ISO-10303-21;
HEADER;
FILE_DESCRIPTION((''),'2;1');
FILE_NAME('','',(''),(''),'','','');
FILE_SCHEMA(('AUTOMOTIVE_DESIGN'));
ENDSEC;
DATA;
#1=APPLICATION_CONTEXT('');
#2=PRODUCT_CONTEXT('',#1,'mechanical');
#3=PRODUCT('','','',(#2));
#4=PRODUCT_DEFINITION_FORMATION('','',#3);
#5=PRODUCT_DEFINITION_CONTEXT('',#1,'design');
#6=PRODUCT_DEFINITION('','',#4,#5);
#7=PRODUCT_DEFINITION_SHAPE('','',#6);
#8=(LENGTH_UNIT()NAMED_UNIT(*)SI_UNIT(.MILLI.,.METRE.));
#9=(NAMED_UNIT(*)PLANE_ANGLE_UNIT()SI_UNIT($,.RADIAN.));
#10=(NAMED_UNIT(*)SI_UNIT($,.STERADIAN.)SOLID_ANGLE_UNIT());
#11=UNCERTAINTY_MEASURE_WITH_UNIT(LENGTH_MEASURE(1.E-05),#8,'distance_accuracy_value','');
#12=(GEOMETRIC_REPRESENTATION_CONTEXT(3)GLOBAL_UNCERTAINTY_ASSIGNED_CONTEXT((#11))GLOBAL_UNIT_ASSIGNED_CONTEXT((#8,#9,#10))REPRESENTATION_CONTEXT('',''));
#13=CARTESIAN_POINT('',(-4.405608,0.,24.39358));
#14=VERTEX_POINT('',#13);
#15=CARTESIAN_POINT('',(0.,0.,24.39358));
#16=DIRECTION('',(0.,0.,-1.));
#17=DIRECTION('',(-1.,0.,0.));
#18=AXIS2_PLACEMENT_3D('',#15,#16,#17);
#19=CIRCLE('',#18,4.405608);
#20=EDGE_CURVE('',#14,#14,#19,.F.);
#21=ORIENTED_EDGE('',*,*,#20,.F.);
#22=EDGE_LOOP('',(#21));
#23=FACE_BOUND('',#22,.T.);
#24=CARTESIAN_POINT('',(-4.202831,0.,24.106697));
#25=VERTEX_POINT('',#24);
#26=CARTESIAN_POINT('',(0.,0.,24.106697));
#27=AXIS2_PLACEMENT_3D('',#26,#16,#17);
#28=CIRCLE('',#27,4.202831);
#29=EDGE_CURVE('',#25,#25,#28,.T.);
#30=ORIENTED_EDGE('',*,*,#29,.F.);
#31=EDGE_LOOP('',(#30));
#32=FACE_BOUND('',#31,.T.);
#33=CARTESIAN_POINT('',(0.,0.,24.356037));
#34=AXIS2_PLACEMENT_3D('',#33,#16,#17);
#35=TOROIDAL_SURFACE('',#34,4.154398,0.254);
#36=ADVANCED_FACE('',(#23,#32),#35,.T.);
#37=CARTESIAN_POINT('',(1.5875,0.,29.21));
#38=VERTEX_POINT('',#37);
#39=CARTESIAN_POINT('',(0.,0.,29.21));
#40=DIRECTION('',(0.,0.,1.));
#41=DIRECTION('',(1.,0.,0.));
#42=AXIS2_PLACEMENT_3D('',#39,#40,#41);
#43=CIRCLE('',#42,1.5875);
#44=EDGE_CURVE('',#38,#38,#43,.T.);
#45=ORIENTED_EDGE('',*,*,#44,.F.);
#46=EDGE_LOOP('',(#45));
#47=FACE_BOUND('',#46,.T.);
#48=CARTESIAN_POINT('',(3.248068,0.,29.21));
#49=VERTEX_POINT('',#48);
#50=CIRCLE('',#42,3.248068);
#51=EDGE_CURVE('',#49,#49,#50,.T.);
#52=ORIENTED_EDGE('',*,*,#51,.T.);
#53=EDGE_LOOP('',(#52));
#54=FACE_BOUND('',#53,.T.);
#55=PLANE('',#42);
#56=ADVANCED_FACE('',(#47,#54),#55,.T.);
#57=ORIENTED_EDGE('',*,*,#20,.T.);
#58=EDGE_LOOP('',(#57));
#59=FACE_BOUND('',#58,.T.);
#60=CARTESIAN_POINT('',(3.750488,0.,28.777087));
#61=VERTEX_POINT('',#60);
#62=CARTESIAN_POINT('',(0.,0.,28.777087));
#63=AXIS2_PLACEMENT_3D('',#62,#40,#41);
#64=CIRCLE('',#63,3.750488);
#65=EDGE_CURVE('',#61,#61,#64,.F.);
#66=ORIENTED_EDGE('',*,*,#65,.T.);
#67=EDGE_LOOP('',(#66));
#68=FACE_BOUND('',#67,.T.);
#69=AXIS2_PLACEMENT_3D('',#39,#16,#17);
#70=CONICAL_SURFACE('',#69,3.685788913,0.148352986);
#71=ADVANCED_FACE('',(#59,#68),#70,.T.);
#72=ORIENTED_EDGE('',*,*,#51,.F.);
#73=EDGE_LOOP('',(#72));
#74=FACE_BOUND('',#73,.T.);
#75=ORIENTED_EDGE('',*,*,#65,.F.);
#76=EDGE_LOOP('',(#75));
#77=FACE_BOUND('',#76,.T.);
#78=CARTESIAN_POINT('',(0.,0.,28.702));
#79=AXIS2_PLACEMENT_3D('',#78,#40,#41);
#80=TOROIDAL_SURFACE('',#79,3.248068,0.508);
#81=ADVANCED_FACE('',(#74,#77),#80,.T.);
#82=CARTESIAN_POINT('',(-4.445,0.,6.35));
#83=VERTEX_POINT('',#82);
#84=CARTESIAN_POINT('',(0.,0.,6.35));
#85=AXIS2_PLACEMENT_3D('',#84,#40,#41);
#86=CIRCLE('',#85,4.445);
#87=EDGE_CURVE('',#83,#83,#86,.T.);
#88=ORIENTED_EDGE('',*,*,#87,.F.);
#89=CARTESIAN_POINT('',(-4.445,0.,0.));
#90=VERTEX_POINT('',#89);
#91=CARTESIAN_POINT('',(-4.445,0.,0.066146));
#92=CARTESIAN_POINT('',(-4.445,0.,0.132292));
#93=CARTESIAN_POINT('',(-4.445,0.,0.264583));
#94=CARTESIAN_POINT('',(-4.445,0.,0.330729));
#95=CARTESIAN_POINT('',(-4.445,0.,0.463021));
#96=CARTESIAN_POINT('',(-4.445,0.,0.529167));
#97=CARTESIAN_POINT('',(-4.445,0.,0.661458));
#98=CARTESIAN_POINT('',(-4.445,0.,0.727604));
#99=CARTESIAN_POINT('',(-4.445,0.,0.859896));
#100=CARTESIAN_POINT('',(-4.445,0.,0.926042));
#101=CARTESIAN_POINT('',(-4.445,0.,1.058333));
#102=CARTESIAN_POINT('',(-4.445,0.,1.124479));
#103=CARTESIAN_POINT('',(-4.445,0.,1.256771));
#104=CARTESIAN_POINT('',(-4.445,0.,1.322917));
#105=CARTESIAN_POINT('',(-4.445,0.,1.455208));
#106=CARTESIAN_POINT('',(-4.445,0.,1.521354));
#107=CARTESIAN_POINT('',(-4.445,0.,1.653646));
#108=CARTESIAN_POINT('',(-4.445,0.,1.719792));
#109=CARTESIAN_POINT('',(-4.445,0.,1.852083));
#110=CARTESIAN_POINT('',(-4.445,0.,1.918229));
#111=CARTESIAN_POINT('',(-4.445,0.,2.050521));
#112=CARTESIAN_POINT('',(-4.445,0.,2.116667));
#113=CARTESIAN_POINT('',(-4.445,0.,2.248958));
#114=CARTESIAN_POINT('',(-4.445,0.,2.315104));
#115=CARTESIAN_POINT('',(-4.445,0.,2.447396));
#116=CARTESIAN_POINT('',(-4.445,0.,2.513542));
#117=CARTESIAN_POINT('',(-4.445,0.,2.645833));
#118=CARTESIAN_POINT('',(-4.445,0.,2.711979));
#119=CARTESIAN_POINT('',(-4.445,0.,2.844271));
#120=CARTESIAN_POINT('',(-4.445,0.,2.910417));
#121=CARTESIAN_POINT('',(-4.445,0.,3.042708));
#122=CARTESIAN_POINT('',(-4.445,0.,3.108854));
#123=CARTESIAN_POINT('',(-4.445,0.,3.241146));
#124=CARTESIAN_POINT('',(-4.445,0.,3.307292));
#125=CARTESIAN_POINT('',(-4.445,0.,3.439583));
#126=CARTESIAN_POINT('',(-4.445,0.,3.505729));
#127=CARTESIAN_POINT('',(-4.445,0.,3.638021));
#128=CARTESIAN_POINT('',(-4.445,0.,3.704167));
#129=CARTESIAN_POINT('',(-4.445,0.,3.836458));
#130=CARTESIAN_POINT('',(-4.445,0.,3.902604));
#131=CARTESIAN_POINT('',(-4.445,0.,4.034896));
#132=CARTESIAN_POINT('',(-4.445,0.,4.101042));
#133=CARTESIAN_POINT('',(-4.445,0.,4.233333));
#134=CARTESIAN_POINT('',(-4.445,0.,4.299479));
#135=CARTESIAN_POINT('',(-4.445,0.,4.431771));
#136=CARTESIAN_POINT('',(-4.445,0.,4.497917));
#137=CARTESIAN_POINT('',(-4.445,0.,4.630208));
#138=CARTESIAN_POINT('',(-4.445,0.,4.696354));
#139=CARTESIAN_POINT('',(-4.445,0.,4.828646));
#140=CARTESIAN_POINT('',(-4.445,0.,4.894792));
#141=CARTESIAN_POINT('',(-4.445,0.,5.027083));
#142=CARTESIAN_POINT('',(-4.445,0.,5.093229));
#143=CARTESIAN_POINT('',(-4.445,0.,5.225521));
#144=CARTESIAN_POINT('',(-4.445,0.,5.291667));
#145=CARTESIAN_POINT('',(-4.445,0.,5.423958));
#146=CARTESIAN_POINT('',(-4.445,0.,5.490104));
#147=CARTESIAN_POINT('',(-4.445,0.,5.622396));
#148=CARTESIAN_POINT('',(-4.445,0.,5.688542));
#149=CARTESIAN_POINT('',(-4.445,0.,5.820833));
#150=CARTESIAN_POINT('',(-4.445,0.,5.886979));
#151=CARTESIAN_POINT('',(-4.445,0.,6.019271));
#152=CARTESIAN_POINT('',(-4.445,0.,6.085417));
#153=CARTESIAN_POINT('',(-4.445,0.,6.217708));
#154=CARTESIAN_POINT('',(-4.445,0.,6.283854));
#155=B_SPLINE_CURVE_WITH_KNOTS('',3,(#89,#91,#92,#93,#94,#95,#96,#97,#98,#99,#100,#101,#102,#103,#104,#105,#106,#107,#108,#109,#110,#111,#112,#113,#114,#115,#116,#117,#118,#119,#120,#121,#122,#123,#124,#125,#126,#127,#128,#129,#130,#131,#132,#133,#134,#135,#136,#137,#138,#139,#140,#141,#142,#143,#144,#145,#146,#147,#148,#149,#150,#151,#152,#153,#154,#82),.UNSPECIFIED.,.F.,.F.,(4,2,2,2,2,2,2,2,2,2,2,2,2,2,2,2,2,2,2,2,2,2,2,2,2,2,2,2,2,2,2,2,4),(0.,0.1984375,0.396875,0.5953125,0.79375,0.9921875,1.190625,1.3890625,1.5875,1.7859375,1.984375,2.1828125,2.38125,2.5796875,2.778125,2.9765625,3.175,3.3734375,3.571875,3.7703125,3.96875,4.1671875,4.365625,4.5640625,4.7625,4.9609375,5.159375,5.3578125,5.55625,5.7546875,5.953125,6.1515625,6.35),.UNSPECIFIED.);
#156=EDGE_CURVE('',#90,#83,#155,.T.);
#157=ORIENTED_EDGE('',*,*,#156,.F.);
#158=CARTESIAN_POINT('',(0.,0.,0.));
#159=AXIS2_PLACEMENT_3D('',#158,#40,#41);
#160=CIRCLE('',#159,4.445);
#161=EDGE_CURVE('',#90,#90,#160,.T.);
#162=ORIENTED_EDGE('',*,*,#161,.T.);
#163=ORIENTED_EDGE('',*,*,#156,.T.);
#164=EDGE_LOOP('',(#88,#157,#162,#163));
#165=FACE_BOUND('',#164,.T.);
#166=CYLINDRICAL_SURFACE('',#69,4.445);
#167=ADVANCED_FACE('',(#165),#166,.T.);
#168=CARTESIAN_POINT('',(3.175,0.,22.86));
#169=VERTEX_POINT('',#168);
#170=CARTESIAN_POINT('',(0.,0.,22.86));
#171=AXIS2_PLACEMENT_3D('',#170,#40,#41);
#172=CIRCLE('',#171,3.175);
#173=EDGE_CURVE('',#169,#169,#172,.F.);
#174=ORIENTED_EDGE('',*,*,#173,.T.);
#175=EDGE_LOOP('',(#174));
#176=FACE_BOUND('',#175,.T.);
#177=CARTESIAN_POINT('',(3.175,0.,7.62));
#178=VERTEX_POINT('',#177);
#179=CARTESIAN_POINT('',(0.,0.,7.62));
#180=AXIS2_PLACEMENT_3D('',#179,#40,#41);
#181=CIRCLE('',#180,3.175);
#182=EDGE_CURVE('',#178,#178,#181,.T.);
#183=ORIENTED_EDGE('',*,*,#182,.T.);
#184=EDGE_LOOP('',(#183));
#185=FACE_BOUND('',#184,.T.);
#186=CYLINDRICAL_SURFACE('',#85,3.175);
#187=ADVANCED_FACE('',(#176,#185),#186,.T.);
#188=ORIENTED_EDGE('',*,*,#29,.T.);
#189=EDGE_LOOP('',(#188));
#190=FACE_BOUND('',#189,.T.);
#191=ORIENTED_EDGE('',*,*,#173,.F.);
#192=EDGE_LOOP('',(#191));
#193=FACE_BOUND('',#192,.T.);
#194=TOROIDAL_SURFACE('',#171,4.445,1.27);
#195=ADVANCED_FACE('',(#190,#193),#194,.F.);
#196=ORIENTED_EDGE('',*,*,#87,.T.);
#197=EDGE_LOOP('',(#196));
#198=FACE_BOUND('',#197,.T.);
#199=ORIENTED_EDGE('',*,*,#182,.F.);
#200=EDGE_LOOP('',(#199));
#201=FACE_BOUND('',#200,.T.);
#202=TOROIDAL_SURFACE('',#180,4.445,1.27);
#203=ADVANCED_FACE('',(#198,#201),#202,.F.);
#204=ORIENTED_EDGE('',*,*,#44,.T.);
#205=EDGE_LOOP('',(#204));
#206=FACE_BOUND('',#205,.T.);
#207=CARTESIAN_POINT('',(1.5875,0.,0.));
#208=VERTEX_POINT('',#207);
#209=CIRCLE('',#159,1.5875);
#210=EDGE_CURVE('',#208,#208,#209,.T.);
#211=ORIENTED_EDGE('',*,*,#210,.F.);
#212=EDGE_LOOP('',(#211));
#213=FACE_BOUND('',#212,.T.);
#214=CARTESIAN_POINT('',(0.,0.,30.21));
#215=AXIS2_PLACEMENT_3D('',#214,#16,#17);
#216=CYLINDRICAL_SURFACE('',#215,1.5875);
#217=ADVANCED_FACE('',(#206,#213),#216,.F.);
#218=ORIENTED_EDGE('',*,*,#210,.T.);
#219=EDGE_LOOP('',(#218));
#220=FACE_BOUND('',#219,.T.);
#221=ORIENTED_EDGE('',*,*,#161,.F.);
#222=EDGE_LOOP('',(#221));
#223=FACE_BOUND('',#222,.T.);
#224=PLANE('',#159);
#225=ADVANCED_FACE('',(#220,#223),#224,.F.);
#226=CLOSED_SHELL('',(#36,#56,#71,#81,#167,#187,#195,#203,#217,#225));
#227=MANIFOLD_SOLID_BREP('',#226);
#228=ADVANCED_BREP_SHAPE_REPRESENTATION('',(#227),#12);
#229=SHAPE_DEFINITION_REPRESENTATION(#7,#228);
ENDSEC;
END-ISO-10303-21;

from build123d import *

# Parameters (mm, degrees)
SKETCH1_R           = 4.445
BOSS_EXTRUDE1_DEPTH = 29.21
SKETCH2_R           = 1.5875
CUT_EXTRUDE1_START  = -5.08
SKETCH3_R           = 6.35
SKETCH3_R_2         = 3.175
CUT_EXTRUDE1_DEPTH  = 17.78
FILLET1_R           = 1.27
FILLET2_R           = 1.27
CHAMFER1_SIZE       = 5.08
CHAMFER1_SIZE_2     = 0.759211087
FILLET3_R           = 0.254
FILLET4_R           = 0.508


# Some blends are built 0.0001 mm under size
with BuildPart() as part:
    # Sketch1 → Boss-Extrude1 (new body)
    with BuildSketch(Plane.XY):
        with Locations(Location((0, 0, 0), (0, 0, 180))):
            Circle(SKETCH1_R)
    extrude(amount=BOSS_EXTRUDE1_DEPTH)

    # Cut-Sweep1: sweep along a curve in space
    with BuildLine() as cut_sweep1_path:
        Line((0, 0, 29.21), (0, 0, 0))
    # Sketch2 → Cut-Sweep1 (sweep, cut)
    with BuildSketch(Plane.XY.offset(29.21)):
        Circle(SKETCH2_R)
    sweep(path=cut_sweep1_path.line, mode=Mode.SUBTRACT)

    # Sketch3 → Cut-Extrude1 (cut)
    with BuildSketch(Plane.XY.offset(29.21).offset(CUT_EXTRUDE1_START)):
        Circle(SKETCH3_R)
        Circle(SKETCH3_R_2, mode=Mode.SUBTRACT)
    extrude(amount=-CUT_EXTRUDE1_DEPTH, mode=Mode.SUBTRACT)

    # Fillet1
    fillet1_edges = [part.edges().sort_by_distance(p)[0] for p in [
        (-3.175, 0, 6.35),
    ]]
    fillet(fillet1_edges, radius=FILLET1_R - 0.0001)  # a hair under: the kernel refuses the full size

    # Fillet2
    fillet2_edges = [part.edges().sort_by_distance(p)[0] for p in [
        (-3.175, 0, 24.13),
    ]]
    fillet(fillet2_edges, radius=FILLET2_R - 0.0001)  # a hair under: the kernel refuses the full size

    # Chamfer1
    # the kernel refuses this chamfer: 5.08, 0.759211087 mm, written as the material it takes off along each edge
    with BuildSketch(Plane(origin=(0, 0, 29.21), x_dir=(-1, 0, 0), z_dir=(0, 1, 0))) as chamfer1_piece_1:
        Polygon((4.445, -CHAMFER1_SIZE), (4.445 - CHAMFER1_SIZE_2, 0), (4.445, 0), align=None)
    revolve(axis=Axis((0, 0, 29.21), (0, 0, 1)), mode=Mode.SUBTRACT)

    # Fillet3
    fillet3_edges = [part.edges().sort_by_distance(p)[0] for p in [
        (4.445, 0, 24.13),
    ]]
    fillet(fillet3_edges, radius=FILLET3_R)

    # Fillet4
    fillet4_edges = [part.edges().sort_by_distance(p)[0] for p in [
        (3.685788913, 0, 29.21),
    ]]
    fillet(fillet4_edges, radius=FILLET4_R)


solid = part.part
